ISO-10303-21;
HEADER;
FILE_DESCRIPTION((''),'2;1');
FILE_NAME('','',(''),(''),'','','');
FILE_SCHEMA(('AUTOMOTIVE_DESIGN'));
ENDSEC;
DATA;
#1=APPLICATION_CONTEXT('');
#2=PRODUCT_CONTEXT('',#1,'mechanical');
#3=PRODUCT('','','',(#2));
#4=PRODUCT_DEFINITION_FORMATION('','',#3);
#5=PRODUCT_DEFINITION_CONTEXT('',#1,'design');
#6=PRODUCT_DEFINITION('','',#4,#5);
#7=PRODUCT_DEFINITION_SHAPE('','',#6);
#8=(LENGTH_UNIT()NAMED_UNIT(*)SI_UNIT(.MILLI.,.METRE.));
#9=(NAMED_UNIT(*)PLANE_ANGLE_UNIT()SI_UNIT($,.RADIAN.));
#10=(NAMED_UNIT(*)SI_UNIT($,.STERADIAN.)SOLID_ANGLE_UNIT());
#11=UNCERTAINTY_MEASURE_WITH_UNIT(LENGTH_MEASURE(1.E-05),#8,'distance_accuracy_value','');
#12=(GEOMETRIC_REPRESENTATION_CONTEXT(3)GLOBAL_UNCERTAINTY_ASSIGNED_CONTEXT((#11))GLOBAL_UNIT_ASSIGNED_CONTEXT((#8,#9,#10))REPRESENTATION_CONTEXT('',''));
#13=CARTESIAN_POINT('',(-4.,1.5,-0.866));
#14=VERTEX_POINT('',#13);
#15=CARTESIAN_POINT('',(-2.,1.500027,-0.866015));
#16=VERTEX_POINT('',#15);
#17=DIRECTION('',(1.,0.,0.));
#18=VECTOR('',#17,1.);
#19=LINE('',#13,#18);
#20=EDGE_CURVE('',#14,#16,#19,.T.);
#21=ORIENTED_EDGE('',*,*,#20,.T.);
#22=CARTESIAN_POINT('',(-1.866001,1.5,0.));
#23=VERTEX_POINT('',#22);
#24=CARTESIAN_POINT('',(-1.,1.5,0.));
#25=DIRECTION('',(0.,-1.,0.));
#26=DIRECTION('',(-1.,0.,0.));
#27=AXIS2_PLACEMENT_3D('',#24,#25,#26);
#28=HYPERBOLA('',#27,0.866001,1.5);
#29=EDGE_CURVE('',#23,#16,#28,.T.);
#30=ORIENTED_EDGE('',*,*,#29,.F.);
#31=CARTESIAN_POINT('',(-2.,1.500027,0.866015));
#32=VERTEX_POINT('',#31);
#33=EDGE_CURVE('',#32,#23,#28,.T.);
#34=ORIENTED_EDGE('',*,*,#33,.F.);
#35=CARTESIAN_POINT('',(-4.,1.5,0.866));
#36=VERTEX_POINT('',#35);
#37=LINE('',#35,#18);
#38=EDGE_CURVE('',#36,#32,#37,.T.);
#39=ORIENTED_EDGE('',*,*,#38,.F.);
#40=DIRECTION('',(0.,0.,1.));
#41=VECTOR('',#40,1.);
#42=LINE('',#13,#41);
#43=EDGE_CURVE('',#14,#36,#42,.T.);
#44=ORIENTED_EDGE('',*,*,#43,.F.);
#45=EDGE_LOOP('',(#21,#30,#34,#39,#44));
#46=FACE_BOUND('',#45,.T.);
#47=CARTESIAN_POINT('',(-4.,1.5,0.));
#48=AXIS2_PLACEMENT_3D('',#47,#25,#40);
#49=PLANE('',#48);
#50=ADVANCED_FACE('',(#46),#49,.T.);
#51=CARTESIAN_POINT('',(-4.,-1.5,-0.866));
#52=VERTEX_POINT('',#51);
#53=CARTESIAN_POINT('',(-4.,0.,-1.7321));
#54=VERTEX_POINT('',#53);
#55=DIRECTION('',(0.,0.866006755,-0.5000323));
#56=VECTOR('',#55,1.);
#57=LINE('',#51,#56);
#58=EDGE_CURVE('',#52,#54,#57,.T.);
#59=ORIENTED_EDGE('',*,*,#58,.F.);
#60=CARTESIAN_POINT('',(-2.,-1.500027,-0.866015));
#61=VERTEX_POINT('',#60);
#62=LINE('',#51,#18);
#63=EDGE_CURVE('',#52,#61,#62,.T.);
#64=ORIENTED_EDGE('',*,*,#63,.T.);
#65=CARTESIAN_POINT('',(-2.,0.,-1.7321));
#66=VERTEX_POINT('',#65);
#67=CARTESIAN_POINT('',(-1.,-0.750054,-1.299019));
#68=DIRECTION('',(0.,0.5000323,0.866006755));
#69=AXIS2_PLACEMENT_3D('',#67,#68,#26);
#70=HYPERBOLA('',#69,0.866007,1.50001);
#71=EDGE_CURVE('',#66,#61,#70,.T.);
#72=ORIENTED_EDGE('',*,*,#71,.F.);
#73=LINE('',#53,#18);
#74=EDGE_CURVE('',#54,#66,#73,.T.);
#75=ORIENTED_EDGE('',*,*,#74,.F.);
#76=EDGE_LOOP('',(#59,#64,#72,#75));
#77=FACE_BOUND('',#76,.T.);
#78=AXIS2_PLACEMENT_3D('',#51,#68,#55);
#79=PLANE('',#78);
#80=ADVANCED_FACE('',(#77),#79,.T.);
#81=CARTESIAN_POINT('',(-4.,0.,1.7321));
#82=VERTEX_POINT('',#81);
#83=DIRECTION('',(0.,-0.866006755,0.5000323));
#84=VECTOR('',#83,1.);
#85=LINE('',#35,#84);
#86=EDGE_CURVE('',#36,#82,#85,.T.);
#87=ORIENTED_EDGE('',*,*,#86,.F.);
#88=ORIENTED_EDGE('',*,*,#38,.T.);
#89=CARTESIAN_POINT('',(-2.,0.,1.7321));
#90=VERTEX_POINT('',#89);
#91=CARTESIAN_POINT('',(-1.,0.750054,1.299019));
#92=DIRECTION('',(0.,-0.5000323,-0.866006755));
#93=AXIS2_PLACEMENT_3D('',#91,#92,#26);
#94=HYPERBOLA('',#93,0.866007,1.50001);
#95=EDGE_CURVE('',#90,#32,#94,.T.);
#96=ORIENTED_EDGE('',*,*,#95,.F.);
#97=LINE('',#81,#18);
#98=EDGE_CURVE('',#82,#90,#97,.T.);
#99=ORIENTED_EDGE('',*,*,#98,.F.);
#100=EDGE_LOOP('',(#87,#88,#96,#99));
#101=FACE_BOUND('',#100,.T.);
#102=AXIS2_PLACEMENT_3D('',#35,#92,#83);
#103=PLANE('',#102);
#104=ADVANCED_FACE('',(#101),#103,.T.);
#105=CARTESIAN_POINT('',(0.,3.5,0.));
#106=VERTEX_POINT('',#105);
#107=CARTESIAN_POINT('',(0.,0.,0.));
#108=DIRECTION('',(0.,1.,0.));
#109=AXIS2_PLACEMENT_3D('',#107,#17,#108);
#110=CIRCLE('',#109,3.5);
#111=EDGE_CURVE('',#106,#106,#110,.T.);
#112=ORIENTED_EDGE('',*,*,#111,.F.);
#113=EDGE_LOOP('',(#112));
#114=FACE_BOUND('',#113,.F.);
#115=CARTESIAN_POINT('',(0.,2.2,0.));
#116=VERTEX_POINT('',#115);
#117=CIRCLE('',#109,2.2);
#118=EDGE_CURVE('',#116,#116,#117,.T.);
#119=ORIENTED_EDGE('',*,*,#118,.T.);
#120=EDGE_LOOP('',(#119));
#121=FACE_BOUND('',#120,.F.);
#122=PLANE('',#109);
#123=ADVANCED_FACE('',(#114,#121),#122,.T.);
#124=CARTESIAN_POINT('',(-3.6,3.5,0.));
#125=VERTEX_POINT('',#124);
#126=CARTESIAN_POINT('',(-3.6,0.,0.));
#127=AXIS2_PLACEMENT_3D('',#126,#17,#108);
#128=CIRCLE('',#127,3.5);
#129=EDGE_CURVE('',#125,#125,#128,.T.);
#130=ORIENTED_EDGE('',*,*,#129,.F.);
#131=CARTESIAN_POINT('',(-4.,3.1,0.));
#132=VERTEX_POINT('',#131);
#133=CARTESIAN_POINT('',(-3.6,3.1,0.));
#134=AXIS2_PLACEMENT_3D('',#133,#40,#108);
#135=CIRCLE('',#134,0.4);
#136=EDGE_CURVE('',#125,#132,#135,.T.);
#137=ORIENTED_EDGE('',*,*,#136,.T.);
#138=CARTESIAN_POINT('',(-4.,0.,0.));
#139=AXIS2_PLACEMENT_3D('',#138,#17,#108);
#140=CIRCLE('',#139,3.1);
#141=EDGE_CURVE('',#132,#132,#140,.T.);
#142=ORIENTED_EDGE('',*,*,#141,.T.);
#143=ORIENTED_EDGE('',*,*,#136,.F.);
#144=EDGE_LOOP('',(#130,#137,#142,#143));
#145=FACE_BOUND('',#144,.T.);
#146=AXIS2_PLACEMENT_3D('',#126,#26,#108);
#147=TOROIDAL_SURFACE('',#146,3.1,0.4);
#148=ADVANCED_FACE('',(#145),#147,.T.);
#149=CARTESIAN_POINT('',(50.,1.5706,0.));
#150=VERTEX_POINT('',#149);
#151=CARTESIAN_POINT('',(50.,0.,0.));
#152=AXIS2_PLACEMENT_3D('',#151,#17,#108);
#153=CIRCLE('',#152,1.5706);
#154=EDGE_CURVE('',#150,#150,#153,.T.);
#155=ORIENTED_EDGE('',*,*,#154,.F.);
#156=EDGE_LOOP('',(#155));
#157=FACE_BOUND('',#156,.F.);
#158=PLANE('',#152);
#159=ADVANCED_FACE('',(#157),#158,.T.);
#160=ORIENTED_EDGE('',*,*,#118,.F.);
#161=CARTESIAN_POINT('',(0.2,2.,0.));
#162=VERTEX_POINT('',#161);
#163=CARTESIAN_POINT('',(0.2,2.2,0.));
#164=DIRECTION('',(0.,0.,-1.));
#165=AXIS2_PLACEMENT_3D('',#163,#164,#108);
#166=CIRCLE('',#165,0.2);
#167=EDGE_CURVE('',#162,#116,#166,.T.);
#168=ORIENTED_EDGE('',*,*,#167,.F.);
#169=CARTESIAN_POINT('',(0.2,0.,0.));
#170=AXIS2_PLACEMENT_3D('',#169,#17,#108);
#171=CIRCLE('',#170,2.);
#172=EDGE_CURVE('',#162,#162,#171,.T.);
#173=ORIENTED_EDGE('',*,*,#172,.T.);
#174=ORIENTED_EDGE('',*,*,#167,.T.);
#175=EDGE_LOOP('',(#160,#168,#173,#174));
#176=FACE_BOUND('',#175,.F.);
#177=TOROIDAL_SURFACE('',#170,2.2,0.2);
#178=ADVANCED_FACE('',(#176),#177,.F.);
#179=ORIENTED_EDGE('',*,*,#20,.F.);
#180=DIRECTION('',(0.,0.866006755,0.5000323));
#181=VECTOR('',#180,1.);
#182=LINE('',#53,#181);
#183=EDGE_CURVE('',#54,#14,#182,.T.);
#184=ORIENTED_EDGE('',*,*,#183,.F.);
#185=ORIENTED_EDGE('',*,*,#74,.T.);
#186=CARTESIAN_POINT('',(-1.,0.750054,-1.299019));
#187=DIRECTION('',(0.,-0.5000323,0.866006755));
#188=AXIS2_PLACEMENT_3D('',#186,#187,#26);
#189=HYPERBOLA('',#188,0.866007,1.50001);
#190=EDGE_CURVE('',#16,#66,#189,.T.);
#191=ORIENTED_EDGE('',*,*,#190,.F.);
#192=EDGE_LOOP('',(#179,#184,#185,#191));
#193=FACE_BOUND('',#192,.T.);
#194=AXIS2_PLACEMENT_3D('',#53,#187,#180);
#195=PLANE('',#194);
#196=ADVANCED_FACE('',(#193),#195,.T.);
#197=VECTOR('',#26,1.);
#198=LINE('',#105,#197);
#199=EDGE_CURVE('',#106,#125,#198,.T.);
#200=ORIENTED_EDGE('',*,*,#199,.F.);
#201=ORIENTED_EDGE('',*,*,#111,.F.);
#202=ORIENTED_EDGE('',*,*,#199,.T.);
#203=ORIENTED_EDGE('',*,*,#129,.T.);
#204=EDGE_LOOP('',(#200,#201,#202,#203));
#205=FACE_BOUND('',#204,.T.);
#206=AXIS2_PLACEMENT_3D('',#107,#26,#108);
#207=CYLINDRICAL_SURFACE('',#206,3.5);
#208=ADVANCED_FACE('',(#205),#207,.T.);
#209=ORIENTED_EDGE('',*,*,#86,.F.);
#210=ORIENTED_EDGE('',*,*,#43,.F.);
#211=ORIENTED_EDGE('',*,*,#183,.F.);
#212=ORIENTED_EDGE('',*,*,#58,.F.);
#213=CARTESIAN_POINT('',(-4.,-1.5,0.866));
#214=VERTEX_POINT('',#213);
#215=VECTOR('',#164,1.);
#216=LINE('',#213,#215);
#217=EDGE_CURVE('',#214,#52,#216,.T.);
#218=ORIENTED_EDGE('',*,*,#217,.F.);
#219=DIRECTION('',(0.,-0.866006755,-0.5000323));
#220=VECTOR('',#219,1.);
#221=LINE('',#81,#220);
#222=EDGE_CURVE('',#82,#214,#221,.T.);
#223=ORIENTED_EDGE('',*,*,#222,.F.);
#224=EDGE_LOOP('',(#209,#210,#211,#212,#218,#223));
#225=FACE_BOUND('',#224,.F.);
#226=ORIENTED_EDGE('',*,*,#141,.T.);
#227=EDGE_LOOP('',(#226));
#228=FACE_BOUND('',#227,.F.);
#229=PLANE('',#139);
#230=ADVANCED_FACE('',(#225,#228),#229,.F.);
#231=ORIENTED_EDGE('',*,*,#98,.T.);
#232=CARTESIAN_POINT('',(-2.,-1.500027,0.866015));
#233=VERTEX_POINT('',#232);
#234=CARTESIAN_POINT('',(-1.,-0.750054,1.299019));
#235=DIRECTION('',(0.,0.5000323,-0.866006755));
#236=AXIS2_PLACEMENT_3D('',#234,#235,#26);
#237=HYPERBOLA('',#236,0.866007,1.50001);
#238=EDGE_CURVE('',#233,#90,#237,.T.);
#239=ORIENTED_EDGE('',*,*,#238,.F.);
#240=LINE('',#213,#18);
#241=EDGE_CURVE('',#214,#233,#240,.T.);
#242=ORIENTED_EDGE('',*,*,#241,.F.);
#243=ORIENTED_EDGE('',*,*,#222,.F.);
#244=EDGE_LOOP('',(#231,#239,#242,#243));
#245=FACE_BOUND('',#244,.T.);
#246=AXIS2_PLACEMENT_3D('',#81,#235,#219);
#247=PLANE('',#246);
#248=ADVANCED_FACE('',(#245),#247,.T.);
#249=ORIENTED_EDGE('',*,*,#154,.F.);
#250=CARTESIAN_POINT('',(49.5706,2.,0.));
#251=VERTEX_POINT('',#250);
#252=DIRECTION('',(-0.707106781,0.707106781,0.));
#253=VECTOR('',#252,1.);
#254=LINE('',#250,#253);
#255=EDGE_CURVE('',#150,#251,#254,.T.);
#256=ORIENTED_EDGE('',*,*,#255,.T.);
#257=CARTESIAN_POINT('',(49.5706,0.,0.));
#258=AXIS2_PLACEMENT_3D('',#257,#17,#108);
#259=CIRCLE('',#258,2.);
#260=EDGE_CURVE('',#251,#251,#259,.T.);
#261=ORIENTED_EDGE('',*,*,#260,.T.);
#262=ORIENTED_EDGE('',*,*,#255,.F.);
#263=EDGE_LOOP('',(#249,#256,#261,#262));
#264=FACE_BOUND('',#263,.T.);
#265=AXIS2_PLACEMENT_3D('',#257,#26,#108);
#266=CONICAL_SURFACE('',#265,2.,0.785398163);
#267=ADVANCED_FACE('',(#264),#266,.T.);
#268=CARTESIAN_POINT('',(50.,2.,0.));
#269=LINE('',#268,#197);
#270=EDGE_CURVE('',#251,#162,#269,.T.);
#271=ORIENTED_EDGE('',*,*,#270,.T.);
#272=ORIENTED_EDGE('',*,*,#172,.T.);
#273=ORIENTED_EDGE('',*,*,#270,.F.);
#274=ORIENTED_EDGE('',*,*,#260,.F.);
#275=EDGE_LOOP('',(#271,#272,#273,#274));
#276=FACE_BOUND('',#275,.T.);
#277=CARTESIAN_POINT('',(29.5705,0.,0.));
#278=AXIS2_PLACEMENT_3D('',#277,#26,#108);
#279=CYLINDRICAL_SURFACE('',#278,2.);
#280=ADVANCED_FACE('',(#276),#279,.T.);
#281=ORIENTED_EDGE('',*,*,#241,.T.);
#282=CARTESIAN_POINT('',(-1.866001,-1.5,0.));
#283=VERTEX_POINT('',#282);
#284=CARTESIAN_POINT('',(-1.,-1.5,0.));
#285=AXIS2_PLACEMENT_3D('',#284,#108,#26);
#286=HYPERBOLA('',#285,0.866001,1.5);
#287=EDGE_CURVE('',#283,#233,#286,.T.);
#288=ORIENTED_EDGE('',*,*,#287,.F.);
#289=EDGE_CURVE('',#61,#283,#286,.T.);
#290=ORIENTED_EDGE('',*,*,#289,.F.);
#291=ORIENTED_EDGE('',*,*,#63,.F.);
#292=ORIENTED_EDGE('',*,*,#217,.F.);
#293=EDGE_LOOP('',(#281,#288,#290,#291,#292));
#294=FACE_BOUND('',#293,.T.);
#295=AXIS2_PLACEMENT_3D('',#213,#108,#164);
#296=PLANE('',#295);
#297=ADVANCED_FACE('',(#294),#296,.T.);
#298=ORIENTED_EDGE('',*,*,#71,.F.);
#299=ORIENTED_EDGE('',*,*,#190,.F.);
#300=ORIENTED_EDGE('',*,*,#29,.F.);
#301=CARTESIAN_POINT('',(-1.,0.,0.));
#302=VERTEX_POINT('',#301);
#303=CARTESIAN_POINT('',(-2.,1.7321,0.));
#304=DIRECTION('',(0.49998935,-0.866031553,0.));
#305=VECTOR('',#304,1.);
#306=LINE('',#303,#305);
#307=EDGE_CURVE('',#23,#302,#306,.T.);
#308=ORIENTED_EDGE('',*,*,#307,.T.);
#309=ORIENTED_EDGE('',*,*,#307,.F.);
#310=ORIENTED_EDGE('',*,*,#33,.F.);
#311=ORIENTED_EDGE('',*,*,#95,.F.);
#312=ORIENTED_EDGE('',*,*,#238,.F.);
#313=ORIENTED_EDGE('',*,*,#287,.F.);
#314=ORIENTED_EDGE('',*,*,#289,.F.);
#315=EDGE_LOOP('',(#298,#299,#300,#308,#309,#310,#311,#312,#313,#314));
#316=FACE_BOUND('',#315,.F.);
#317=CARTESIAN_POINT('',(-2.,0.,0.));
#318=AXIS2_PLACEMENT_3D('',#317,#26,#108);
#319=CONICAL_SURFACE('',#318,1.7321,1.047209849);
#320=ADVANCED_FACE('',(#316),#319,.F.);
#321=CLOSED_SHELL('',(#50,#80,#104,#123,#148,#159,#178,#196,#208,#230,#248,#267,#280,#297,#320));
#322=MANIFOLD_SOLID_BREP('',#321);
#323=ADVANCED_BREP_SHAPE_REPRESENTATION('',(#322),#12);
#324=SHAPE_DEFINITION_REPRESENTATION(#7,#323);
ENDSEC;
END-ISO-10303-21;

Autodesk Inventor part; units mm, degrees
ref_plane "YZ Plane" through (0, 0, 0) normal (1, 0, 0) x (0, 1, 0)
ref_plane "XZ Plane" through (0, 0, 0) normal (0, 1, 0) x (-1, 0, 0)
sketch "Sketch1" plane through (0, 0, 0) normal (0, 0, 1) x (1, 0, 0)
  line L0 (-1, 0) -> (50, 0)
  line L1 (50, 0) -> (50, 2)
  line L2 (50, 2) -> (30, 2)
  line L3 (30, 2) -> (29.5705, 2)
  line L4 (29.5705, 2) -> (0, 2)
  line L5 (0, 2) -> (0, 3.5)
  line L6 (0, 3.5) -> (-4, 3.5)
  line L7 (-4, 3.5) -> (-4, 1.7321)
  line L8 (-4, 1.7321) -> (-2, 1.7321)
  line L9 (-2, 1.7321) -> (-1, 0)
  line L10 (-12.8, 0) -> (48.8, 0) projected
  line L11 (0, -0.7) -> (0, 4.2) projected
  line L12 (30, 2) -> (0, 2) construction
  dimension "d1" = 20
  dimension "d2" = 0.4295
  dimension "d3" = 4
  dimension "d4" = 2
  dimension "d5" = 60
  dimension "d6" = 4
  dimension "d7" = 4
  dimension "d8" = 3.4641
  dimension "d9" = 7
  dimension "d26" = 50
revolve "Body" add sketch "Sketch1" angle 360 about axis through (-1, 0, 0) along (1, 0, 0)
sketch "Sketch2" plane through (-4, 0, 0) normal (-1, 0, 0) x (0, 0, 1)
  circle A0 centre (0, 0) radius 1.7321 projected
  line L0 (0, -4.9) -> (0, 4.9) projected
  line L1 (-4.9, 0) -> (4.9, 0) projected
  line L2 (1.7321, 0) -> (0.866, -1.5)
  line L3 (0.866, -1.5) -> (-0.866, -1.5)
  line L4 (-0.866, -1.5) -> (-1.7321, 0)
  line L5 (-1.7321, 0) -> (-0.866, 1.5)
  line L6 (-0.866, 1.5) -> (0.866, 1.5)
  line L7 (0.866, 1.5) -> (1.7321, 0)
extrude "Slot" add sketch "Sketch2" against normal up to next contours L7 A0 | A0 L2 | L6 L0 A0 | A0 L0 L3 | L0 L6 A0 | A0 L3 L0 | L4 A0 | A0 L5
fillet "Fillet1" radius 0.4 1 edges at (-4, -3.5, 0)
thread "Thread" size "M4x0.7" class "6g" standard "ISO Metric profile" length 20
chamfer "Chamfer1" distance 0.4294 distance2 0.4294 1 edges at (50, -2, 0) measured on face at (50, -0.2007, 0.5552)
ref_plane "Work Plane1" through (29, 0, 0) normal (0, -1, 0) x (1, 0, 0)
fillet "Fillet2" radius 0.2 1 edges at (0, -2, 0)
equation "\"d30\" = R"
equation "\"d17\" = RR"
equation "\"d13\" = GEL"
equation "\"d15\" = -0.5 * SPD + 0.5 * GD"
equation "\"d16\" = GUL"
equation "\"d1\" = GEL"
equation "\"d3\" = KOH"
equation "\"d4\" = INTI"
equation "\"d6\" = GD"
equation "\"d7\" = BDM"
equation "\"d8\" = 1.1547 * SW"
equation "\"d9\" = KOD"
equation "\"d26\" = NLG"
equation "\"GD\" = NND"
equation "\"NLG\" = 50"
equation "\"GEL\" = 20"
equation "\"KOD\" = 7"
equation "\"KOH\" = 4"
equation "\"INTI\" = 2"
equation "\"GAL\" = 0.61345 * PTC"
equation "\"GUL\" = 0.61345 * PTC"
equation "\"BDM\" = NND"
equation "\"SW\" = 3"
equation "\"RR\" = 0.4"
equation "\"SPD\" = NND - 1.2269 * PTC"
equation "\"R\" = 0.2"
equation "\"TOA\" = 30deg"
equation "\"GD1\" = THREADDIA - 1.2269 * PTC"
equation "\"THREADDIA\" = 4"
equation "\"FAWI\" = 45deg"
equation "\"ANG\" = 120deg"
equation "\"PTC\" = 0.7"
equation "\"NND\" = 4"
equation "\"E0\" = 1.155 * SW"
properties part number "DIN 912 - M4 x 40" material "Steel, Mild"
